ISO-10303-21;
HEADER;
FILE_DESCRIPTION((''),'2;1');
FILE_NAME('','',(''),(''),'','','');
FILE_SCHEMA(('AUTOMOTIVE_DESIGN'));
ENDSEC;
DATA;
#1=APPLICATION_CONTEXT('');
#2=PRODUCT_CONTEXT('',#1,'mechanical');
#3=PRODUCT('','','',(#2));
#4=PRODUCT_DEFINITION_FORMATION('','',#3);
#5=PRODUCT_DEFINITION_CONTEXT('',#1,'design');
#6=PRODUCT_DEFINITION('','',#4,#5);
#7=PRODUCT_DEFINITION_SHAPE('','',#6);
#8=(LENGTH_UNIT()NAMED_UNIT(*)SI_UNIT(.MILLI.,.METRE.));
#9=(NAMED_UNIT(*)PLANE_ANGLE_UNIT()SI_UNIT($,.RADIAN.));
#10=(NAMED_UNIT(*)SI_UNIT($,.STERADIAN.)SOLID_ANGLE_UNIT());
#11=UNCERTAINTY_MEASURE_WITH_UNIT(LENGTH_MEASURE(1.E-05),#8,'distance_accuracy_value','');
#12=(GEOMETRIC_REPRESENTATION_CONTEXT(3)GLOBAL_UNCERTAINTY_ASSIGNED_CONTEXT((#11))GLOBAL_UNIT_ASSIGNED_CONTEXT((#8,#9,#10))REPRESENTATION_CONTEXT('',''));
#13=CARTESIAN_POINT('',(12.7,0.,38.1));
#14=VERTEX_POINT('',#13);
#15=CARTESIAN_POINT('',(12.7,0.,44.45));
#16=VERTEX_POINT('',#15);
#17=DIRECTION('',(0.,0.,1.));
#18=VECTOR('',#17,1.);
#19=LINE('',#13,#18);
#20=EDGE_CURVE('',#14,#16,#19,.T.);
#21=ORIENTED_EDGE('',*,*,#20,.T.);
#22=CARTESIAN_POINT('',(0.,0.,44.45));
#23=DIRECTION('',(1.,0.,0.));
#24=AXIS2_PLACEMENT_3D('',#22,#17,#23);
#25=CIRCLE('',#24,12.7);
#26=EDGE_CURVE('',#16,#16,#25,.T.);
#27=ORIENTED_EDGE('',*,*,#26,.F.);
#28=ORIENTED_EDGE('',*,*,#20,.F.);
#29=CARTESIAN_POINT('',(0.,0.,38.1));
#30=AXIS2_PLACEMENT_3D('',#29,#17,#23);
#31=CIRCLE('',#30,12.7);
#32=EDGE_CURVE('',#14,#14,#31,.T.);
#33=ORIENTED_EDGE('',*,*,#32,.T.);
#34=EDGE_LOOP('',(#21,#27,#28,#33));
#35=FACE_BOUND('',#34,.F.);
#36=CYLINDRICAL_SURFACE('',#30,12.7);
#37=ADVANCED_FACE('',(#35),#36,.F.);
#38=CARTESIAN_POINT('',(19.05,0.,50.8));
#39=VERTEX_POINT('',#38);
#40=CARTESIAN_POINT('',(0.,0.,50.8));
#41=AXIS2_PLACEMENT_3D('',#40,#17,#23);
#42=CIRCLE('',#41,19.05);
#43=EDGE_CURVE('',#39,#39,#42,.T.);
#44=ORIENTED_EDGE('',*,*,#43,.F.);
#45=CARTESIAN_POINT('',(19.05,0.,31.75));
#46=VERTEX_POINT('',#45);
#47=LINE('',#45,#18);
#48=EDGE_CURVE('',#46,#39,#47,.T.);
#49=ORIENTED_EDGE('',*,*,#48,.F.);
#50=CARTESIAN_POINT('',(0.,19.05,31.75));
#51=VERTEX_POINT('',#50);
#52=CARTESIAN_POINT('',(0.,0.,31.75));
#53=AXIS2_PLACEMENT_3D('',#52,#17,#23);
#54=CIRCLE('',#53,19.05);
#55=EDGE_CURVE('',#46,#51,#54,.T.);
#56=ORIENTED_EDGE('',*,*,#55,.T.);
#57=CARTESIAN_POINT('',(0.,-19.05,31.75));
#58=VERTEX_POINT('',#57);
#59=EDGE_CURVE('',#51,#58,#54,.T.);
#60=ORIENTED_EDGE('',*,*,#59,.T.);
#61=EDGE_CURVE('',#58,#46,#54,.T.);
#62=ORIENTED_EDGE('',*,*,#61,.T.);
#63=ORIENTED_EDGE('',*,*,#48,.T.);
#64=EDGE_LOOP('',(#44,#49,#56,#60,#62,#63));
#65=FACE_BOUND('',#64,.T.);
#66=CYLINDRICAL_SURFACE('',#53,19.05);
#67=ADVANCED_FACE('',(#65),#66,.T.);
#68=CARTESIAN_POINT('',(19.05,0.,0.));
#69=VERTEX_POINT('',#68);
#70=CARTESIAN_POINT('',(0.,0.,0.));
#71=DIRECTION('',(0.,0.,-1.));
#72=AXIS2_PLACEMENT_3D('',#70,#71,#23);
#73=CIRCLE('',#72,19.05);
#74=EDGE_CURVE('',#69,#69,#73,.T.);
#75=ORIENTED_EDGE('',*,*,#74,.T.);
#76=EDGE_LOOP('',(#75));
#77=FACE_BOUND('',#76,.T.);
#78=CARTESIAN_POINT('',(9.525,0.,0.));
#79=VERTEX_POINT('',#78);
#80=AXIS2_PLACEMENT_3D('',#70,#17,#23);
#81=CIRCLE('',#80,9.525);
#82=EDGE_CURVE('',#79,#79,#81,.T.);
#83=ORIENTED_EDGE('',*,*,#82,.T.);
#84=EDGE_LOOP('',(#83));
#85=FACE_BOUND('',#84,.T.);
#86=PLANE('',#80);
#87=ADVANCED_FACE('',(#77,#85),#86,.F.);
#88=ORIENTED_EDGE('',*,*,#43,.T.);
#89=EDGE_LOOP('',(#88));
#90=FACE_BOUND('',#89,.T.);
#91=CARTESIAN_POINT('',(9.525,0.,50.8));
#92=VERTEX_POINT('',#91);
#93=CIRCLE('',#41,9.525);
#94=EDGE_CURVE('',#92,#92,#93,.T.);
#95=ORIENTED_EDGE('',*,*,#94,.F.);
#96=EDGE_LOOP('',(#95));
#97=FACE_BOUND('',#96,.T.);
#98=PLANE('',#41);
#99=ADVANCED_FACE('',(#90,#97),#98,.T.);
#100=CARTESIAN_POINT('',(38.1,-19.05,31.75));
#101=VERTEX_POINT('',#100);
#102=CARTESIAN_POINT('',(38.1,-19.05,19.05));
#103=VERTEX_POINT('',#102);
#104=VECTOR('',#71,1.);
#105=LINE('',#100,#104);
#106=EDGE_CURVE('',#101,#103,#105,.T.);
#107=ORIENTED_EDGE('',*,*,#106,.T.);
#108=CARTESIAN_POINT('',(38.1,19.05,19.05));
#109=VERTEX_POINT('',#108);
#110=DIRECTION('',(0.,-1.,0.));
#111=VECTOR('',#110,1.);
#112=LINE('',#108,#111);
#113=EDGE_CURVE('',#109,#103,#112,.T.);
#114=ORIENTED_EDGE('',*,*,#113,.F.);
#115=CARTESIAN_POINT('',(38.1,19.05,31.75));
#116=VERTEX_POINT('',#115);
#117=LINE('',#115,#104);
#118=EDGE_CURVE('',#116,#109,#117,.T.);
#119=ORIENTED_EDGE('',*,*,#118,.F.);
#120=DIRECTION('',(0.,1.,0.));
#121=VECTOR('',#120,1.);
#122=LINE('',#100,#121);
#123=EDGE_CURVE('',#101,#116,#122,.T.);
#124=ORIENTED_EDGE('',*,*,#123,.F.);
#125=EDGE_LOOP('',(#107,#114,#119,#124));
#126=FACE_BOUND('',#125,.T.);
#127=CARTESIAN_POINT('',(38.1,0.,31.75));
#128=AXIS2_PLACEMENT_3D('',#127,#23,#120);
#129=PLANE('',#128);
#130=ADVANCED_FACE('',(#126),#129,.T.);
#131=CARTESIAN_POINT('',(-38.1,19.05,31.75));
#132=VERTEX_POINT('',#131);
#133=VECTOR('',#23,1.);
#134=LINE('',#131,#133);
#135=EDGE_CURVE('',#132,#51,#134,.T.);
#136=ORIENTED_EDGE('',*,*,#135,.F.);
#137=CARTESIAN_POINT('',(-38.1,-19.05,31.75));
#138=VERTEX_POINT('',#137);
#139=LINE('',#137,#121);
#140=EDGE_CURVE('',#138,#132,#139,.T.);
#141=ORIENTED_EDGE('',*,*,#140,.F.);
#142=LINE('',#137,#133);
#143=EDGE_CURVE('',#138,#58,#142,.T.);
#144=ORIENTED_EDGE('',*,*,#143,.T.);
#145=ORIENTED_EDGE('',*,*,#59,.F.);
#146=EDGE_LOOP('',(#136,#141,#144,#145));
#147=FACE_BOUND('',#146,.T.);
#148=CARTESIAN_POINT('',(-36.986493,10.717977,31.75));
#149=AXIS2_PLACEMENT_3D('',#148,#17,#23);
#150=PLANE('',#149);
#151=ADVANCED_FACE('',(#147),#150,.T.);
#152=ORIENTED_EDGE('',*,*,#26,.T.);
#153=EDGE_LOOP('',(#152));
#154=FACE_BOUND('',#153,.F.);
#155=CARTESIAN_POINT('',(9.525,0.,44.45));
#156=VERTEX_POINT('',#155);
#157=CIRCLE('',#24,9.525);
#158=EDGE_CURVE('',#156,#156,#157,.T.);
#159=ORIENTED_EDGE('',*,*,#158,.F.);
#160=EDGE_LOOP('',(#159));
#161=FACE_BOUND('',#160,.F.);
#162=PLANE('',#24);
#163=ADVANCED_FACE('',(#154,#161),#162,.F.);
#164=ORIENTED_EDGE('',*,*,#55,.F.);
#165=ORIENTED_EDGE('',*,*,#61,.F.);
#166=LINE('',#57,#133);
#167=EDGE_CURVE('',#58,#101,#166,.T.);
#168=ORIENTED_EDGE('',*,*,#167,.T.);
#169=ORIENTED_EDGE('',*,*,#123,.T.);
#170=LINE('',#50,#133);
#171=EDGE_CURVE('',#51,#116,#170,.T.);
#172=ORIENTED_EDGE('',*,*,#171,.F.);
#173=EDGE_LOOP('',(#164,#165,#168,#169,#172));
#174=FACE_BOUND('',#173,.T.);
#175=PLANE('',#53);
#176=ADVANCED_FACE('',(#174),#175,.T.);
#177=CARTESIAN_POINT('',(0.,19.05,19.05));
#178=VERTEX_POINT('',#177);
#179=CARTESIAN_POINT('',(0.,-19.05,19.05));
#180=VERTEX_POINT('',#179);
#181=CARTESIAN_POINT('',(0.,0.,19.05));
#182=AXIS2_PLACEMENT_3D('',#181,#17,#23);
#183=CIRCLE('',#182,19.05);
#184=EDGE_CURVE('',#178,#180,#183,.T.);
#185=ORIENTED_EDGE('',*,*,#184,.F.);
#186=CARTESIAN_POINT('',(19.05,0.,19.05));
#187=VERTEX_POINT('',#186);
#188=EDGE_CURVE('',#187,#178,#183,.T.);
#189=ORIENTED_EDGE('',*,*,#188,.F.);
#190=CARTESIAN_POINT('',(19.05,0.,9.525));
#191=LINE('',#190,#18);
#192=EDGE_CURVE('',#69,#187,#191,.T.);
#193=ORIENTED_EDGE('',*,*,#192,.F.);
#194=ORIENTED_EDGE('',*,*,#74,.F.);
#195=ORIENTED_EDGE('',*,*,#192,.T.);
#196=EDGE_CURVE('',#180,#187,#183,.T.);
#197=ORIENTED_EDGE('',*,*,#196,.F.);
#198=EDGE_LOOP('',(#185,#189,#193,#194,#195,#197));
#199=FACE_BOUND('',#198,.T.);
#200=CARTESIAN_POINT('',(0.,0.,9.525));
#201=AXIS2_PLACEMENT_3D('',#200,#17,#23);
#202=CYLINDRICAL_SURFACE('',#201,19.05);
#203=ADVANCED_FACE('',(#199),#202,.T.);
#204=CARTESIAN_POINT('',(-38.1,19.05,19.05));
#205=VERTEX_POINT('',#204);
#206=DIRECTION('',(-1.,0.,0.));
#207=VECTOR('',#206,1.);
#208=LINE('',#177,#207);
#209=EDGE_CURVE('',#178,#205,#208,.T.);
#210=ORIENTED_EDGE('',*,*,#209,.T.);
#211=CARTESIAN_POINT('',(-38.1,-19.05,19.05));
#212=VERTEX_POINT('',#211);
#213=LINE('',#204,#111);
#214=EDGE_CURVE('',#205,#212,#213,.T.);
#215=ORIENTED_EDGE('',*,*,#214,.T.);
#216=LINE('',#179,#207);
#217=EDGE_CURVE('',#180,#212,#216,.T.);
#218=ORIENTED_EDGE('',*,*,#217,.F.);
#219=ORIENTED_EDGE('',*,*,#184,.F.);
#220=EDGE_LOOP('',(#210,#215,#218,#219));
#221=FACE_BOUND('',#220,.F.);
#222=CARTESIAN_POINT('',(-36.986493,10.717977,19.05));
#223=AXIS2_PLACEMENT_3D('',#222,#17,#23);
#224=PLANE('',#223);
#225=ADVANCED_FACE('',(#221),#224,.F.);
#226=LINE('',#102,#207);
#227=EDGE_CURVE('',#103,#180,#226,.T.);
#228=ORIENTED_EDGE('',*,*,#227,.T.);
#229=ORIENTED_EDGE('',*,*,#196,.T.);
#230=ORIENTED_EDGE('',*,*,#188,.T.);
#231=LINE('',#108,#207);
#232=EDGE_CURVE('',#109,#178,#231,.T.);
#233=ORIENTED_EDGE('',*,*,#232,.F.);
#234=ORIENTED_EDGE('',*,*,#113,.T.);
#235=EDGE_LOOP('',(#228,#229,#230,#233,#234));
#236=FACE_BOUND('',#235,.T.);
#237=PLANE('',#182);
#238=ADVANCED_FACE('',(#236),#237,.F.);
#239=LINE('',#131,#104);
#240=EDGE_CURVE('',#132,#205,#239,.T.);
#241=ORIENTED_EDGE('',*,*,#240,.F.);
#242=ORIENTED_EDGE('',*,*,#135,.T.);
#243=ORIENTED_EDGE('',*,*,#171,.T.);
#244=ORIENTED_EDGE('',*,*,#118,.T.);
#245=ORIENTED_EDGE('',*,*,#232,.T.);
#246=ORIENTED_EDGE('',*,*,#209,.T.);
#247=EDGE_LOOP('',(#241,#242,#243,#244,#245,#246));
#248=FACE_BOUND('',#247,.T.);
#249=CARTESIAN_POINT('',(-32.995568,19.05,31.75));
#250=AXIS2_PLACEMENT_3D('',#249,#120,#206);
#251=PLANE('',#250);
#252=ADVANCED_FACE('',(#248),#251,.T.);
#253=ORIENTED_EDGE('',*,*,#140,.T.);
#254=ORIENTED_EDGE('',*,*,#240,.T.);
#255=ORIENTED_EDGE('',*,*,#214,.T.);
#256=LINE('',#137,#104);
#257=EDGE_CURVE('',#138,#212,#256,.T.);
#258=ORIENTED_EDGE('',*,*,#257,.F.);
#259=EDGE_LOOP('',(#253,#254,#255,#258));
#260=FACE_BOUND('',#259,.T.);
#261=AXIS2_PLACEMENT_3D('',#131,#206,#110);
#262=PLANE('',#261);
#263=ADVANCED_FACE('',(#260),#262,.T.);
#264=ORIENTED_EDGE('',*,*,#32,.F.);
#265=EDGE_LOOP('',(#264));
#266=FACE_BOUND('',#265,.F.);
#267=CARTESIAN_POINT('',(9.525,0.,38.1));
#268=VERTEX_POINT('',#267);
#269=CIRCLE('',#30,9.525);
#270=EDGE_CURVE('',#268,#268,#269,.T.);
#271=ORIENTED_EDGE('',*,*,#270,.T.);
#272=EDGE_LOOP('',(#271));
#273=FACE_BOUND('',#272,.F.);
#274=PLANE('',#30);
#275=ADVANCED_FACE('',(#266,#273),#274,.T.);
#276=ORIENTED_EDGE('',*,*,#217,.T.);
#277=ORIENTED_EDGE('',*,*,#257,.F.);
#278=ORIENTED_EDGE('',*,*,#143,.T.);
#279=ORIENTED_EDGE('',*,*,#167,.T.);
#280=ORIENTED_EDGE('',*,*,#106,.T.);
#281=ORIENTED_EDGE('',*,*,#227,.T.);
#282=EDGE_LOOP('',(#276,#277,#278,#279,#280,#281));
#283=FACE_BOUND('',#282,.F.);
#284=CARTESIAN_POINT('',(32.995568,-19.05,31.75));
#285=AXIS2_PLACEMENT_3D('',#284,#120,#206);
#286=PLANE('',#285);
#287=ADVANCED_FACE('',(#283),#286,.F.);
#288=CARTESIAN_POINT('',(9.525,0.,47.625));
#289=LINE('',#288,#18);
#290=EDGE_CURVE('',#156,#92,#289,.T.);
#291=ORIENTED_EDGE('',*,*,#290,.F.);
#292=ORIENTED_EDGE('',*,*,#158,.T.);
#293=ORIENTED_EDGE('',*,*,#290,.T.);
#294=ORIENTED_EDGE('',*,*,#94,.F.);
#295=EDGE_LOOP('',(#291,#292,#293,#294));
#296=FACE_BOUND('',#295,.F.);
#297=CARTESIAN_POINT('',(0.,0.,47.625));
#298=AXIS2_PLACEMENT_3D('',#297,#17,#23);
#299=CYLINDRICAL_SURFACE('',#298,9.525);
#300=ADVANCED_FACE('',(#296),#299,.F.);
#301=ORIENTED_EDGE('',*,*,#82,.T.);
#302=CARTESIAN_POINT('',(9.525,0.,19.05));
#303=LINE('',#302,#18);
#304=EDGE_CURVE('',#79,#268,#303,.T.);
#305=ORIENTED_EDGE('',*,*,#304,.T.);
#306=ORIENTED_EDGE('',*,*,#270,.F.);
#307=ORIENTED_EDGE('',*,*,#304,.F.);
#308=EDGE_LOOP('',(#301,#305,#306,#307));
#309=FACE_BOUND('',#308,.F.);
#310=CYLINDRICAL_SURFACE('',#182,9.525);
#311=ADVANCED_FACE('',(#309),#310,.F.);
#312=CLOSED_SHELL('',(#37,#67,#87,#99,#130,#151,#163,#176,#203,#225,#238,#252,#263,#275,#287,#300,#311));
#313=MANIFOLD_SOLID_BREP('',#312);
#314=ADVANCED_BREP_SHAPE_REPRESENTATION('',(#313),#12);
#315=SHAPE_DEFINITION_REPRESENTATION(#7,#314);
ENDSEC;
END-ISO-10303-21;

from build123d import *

# Parameters (mm, degrees)
F0_W     = 9.525
F0_H     = 6.35
F0_H_2   = 12.7
F0_H_3   = 19.05
F3_DEPTH = 31.751
F5_DEPTH = 12.7
F6_W     = 9.525
F6_H     = 6.35
F6_H_2   = 38.1


# Not quite as in the source:
# - an extrude ends at something that could not be found from the text; its depth is read off the source's solid


with BuildPart() as f1:
    # F0 (on Front) → F1 (revolve)
    with BuildSketch(Plane.XZ):
        with Locations((4.7625, 47.625)):
            Rectangle(F0_W, F0_H)
        Polygon((19.05, 50.8), (9.525, 50.8), (9.525, 44.45), (12.7, 44.45), (12.7, 38.1), (9.525, 38.1), (9.525, 31.75), (19.05, 31.75), align=None)
        Polygon((9.525, 44.45), (0, 44.45), (0, 38.1), (9.525, 38.1), (12.7, 38.1), (12.7, 44.45), align=None)
        with Locations((4.7625, 34.925)):
            Rectangle(F0_W, F0_H)
        Polygon((38.1, 31.75), (19.05, 31.75), (9.525, 31.75), (9.525, 19.05), (19.05, 19.05), (38.1, 19.05), align=None)
        with Locations((4.7625, 25.4)):
            Rectangle(F0_W, F0_H_2)
        with Locations((4.7625, 9.525)):
            Rectangle(F0_W, F0_H_3)
        with Locations((14.2875, 9.525)):
            Rectangle(F0_W, F0_H_3)
    revolve(axis=Axis((0, 0, 25.4), (0, 0, 1)))

    # F2 (on face) → F3 (cut, through all)
    with BuildSketch(Plane.XY.offset(31.75)):
        with BuildLine():
            ThreePointArc((32.9955678842, 19.05), (0, 38.1), (-32.9955678842, 19.05))
            Line((-32.9955678842, 19.05), (3.68e-08, 19.05))
            Line((3.68e-08, 19.05), (32.9955678842, 19.05))
        make_face()
        with BuildLine():
            Line((3.68e-08, -19.05), (-32.9955678842, -19.05))
            ThreePointArc((-32.9955678842, -19.05), (0, -38.1), (32.9955678842, -19.05))
            Line((32.9955678842, -19.05), (3.68e-08, -19.05))
        make_face()
    extrude(amount=-F3_DEPTH, mode=Mode.SUBTRACT)

    # F4 (on face) → F5 (join, through all)
    with BuildSketch(Plane.XY.offset(31.75)):
        with BuildLine():
            ThreePointArc((-38.1, 0), (-36.8017739816, 9.8610056184), (-32.9955678842, 19.05))
            Line((-32.9955678842, 19.05), (-38.1, 19.05))
            Line((-38.1, 19.05), (-38.1, 0))
        make_face()
        with BuildLine():
            ThreePointArc((-32.9955678842, -19.05), (-36.8017739816, -9.8610056184), (-38.1, 0))
            Line((-38.1, 0), (-38.1, -19.05))
            Line((-38.1, -19.05), (-32.9955678842, -19.05))
        make_face()
        with BuildLine():
            Line((38.1, 0), (38.1, 19.05))
            Line((38.1, 19.05), (32.9955678842, 19.05))
            ThreePointArc((32.9955678842, 19.05), (36.8017739816, 9.8610056184), (38.1, 0))
        make_face()
        with BuildLine():
            Line((38.1, -19.05), (38.1, 0))
            ThreePointArc((38.1, 0), (36.8017739816, -9.8610056184), (32.9955678842, -19.05))
            Line((32.9955678842, -19.05), (38.1, -19.05))
        make_face()
    extrude(amount=-F5_DEPTH)

    # F6 (on Front) → F7 (revolve, cut)
    with BuildSketch(Plane.XZ):
        with Locations((4.7625, 47.625)):
            Rectangle(F6_W, F6_H)
        Polygon((9.525, 44.45), (0, 44.45), (0, 38.1), (9.525, 38.1), (12.7, 38.1), (12.7, 44.45), align=None)
        with Locations((4.7625, 19.05)):
            Rectangle(F6_W, F6_H_2)
    revolve(axis=Axis((0, 0, 30.4315376466), (0, 0, 1)), mode=Mode.SUBTRACT)


solid = f1.part
